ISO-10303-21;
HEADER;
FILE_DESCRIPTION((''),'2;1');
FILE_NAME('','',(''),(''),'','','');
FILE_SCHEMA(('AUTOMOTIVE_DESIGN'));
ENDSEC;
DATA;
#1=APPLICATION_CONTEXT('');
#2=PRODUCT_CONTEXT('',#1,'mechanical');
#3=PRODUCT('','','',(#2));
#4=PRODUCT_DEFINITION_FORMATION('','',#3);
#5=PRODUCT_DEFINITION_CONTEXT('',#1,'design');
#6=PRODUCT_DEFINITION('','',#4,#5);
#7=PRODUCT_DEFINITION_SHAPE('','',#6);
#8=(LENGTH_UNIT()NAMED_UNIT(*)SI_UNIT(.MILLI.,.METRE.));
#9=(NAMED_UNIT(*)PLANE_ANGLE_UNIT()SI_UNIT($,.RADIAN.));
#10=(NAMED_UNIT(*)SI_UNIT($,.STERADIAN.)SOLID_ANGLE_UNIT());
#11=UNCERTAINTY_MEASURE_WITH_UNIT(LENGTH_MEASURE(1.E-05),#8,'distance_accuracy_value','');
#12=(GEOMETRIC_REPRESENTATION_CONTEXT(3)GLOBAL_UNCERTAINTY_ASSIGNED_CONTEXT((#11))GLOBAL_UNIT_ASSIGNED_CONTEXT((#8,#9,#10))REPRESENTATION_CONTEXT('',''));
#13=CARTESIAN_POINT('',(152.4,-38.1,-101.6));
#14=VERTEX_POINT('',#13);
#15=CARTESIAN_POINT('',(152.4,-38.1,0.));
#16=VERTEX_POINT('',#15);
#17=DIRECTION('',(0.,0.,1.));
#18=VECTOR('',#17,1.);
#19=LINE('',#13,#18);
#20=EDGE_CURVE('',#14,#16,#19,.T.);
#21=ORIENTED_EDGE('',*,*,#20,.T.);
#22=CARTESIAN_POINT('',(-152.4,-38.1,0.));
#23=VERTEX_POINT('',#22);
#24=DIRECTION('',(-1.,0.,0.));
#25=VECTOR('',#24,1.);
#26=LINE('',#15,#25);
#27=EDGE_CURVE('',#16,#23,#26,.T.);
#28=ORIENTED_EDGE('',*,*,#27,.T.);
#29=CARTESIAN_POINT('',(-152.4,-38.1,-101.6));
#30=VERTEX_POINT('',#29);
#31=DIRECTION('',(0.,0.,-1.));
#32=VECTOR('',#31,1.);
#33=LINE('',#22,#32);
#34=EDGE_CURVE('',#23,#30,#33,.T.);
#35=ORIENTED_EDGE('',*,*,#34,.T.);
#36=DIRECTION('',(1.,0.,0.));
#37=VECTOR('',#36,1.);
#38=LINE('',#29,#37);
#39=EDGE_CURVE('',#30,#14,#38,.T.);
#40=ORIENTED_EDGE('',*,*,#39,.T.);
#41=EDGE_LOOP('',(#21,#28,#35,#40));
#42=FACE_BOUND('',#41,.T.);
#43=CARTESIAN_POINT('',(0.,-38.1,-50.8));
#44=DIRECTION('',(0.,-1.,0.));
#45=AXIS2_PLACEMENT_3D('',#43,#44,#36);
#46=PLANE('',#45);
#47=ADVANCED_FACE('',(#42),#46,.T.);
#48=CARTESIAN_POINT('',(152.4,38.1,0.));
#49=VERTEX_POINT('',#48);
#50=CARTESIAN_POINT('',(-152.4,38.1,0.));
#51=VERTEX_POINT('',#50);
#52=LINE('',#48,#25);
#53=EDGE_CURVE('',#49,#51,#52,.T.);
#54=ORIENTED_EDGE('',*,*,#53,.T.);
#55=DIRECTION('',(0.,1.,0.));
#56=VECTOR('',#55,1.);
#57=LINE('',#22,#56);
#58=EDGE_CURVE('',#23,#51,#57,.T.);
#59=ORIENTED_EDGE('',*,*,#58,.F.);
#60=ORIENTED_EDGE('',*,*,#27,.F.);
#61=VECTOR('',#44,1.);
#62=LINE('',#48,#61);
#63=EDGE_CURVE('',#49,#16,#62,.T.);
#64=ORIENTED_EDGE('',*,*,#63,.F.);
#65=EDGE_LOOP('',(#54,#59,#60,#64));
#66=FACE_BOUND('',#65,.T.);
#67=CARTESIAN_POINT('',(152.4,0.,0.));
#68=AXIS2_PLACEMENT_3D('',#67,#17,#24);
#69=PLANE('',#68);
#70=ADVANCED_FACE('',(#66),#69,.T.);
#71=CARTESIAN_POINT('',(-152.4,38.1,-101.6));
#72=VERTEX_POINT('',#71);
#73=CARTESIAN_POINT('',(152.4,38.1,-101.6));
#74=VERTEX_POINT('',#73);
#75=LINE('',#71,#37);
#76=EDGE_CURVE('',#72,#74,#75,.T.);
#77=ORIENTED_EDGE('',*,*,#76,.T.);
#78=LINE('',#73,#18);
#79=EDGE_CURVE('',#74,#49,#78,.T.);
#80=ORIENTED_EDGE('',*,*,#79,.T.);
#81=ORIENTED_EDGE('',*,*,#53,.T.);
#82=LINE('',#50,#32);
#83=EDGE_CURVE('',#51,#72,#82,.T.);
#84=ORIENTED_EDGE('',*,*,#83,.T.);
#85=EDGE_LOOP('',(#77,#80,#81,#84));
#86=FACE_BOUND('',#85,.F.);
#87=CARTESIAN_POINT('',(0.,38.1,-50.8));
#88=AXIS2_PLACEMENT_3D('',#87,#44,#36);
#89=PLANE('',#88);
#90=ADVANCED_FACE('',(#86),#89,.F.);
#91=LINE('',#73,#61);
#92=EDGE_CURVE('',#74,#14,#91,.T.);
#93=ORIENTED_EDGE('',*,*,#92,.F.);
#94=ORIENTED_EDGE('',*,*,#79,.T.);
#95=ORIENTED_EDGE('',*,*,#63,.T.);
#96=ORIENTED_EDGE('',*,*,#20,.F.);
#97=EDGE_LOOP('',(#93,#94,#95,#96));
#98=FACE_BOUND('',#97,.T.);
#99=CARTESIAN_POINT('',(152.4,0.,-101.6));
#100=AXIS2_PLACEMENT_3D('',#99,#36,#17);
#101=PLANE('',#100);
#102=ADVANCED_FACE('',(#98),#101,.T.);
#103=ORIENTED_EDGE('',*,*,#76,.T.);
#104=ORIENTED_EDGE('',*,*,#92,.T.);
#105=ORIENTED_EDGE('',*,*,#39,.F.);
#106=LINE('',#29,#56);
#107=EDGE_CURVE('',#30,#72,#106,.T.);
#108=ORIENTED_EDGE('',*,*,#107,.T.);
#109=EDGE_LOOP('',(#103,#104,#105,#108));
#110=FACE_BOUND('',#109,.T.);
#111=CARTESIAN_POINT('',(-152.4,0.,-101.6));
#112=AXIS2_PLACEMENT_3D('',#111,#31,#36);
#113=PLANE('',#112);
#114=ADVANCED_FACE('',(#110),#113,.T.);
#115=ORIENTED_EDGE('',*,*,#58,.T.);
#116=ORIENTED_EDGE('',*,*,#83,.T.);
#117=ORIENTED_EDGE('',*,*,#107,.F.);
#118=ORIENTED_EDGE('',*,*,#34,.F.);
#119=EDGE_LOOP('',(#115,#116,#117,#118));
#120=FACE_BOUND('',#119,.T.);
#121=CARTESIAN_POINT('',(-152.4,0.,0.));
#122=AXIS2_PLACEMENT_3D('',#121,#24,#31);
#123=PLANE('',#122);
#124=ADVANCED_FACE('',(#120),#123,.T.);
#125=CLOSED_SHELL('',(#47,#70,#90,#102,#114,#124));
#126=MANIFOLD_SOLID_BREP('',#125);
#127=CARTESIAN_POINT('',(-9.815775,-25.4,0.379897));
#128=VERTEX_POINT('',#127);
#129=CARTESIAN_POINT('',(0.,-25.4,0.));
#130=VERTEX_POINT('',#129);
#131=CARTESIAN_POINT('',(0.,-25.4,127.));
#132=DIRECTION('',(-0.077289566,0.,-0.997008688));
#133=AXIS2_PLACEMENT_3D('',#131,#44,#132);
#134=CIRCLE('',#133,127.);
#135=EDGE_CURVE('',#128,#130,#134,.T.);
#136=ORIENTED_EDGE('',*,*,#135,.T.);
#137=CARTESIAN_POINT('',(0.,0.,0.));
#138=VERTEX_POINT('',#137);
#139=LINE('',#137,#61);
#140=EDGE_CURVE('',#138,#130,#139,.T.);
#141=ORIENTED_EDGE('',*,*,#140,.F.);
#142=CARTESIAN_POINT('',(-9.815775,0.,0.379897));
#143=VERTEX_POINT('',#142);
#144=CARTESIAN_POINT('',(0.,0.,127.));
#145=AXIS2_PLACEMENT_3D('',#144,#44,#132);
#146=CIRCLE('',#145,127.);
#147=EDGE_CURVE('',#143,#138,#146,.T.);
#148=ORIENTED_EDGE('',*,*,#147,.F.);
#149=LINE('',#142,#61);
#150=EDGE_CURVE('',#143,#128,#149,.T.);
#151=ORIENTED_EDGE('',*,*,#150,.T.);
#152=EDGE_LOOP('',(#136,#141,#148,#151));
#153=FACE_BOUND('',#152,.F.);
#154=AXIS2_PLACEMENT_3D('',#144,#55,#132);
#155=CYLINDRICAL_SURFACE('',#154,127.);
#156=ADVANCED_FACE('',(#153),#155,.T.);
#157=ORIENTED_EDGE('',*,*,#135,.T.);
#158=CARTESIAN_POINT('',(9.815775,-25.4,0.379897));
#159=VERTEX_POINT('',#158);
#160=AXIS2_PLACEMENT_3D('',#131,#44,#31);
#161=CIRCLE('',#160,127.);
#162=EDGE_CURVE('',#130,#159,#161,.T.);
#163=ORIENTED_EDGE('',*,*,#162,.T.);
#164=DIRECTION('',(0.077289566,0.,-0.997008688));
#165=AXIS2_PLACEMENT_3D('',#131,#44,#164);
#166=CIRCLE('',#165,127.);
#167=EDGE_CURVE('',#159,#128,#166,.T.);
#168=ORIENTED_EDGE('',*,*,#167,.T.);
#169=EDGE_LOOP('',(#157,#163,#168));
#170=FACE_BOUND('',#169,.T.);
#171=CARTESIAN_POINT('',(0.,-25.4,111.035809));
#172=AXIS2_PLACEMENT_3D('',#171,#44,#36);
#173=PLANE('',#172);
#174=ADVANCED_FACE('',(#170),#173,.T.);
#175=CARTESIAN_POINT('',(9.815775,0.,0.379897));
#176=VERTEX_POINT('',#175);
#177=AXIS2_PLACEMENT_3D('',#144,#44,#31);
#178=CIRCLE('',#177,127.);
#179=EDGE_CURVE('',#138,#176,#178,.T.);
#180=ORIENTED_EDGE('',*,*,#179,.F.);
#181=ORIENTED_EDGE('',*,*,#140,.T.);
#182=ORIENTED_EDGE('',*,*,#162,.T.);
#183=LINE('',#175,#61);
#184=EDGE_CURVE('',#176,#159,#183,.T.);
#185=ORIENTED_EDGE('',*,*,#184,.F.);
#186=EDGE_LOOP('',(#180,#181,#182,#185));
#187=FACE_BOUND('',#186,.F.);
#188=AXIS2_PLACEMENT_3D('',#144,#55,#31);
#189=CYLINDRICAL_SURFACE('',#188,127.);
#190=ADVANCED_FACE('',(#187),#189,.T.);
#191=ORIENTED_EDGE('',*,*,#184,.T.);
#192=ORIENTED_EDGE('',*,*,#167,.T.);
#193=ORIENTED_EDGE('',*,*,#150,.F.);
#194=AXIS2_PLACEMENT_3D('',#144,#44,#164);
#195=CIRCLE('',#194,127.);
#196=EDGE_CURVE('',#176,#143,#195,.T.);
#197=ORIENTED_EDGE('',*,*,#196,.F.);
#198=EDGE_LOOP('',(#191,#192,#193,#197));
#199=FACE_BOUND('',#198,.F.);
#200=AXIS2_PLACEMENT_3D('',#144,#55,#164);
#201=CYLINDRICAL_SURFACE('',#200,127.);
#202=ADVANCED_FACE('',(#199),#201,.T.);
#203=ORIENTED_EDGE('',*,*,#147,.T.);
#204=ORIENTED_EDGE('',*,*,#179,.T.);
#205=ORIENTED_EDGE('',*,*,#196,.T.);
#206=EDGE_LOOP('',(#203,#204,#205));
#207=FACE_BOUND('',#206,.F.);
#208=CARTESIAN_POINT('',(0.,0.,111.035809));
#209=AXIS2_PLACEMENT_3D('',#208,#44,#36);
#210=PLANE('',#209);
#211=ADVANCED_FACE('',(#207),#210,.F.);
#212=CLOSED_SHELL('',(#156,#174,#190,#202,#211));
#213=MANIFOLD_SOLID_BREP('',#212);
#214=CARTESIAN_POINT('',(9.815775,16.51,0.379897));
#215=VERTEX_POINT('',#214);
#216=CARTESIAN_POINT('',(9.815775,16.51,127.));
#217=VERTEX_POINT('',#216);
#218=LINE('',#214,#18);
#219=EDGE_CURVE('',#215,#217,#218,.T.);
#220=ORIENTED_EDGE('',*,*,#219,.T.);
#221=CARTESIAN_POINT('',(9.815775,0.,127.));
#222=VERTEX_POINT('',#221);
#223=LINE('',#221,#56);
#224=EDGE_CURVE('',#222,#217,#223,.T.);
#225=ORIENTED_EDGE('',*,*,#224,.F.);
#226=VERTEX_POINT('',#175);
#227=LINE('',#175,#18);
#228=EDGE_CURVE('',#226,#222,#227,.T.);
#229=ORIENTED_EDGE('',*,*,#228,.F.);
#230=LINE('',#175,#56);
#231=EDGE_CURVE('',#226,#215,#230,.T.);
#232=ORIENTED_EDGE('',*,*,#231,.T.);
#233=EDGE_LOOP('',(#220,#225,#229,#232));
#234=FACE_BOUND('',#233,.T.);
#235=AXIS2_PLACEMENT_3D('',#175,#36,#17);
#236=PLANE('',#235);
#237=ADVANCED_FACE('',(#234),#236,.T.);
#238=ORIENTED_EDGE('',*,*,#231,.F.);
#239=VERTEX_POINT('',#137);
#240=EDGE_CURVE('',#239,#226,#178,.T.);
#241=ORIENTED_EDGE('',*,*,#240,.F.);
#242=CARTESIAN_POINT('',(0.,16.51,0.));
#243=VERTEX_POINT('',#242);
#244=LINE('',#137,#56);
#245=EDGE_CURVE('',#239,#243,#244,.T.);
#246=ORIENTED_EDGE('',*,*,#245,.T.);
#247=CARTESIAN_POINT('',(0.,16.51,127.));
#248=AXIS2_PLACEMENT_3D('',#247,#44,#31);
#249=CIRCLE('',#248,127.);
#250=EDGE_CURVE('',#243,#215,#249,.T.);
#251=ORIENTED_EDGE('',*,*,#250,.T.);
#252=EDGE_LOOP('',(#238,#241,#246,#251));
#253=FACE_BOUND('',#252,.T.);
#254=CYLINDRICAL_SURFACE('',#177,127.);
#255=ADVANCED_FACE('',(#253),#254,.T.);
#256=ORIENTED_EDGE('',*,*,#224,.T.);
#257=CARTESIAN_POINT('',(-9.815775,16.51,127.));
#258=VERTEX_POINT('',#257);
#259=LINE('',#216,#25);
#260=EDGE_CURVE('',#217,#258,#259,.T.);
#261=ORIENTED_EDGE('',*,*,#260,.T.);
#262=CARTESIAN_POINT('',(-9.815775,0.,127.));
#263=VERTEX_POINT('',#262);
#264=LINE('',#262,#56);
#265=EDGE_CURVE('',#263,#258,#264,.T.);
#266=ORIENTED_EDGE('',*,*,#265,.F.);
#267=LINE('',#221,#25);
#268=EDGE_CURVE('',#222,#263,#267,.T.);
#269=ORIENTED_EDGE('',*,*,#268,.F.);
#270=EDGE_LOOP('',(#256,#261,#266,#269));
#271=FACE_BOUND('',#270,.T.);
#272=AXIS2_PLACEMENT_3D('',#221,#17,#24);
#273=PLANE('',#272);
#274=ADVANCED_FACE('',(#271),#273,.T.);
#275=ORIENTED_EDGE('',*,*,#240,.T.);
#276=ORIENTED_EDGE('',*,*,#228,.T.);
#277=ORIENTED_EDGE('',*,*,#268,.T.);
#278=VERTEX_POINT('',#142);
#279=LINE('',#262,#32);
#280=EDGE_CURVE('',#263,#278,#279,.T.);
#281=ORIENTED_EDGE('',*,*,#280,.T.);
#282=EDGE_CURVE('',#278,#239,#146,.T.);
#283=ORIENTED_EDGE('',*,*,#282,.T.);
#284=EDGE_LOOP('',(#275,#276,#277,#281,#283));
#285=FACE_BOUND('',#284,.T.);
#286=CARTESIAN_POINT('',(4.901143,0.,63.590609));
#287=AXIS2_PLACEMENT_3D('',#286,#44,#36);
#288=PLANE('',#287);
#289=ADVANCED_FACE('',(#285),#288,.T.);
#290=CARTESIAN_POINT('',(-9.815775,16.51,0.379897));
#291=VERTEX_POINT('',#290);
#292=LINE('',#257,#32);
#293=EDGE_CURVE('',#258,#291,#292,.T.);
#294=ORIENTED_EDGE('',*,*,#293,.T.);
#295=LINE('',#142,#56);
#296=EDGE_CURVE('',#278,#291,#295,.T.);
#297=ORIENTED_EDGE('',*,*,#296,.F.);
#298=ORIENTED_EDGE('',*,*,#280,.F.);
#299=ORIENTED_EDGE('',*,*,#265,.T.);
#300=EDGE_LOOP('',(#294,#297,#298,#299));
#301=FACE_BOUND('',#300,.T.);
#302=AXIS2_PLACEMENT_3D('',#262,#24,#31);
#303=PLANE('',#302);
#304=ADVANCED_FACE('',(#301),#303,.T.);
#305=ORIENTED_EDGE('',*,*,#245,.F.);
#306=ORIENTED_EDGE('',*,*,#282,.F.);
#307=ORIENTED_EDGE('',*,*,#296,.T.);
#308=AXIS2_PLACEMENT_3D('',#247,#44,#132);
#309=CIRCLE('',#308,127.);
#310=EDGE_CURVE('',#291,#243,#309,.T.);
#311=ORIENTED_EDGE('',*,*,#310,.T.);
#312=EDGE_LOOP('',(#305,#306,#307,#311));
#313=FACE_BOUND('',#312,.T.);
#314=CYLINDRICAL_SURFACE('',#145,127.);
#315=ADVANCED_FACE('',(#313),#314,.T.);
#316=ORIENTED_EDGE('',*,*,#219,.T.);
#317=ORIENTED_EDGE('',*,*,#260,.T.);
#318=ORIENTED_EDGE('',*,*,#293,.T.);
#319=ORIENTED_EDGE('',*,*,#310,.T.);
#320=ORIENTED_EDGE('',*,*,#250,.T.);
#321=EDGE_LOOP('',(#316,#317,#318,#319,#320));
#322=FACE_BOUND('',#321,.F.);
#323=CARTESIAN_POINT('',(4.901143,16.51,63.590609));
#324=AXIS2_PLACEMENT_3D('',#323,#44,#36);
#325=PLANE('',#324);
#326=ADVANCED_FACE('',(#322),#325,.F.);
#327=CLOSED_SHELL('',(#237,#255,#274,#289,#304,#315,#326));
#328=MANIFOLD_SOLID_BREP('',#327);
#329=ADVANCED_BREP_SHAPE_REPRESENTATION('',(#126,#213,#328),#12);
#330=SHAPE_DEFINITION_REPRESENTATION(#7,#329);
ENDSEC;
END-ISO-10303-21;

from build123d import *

# Parameters (mm, degrees)
F1_DEPTH = 38.1
F2_DEPTH = 16.51
F3_DEPTH = 25.4


with BuildPart() as f1:
    # F0 (on Front) → F1 (new body, symmetric)
    with BuildSketch(Plane.XZ):
        Polygon((-152.4, -101.6), (152.4, -101.6), (152.4, 0), (9.815774858, 0), (0, 0), (-9.815774858, 0), (-152.4, 0), align=None)
    extrude(amount=F1_DEPTH, both=True)


with BuildPart() as f2:
    # F0 (on Front) → F2 (new body)
    with BuildSketch(Plane.XZ):
        with BuildLine():
            Line((0, 127), (0, 0))
            ThreePointArc((0, 0), (4.9115618074, 0.0950097096), (9.815774858, 0.3798966833))
            Line((9.815774858, 0.3798966833), (9.815774858, 127))
            Line((9.815774858, 127), (0, 127))
        make_face()
        with BuildLine():
            ThreePointArc((-9.815774858, 0.3798966833), (-4.9115618074, 0.0950097096), (0, 0))
            Line((0, 0), (0, 127))
            Line((0, 127), (-9.815774858, 127))
            Line((-9.815774858, 127), (-9.815774858, 0.3798966833))
        make_face()
    extrude(amount=-F2_DEPTH)


with BuildPart() as f3:
    # F0 (on Front) → F3 (new body)
    with BuildSketch(Plane.XZ):
        with BuildLine():
            Line((9.815774858, 127), (9.815774858, 0.3798966833))
            ThreePointArc((9.815774858, 0.3798966833), (93.208377861, 40.7376194595), (127, 127))
            ThreePointArc((127, 127), (-86.2623805405, 220.208377861), (-9.815774858, 0.3798966833))
            Line((-9.815774858, 0.3798966833), (-9.815774858, 127))
            Line((-9.815774858, 127), (0, 127))
            Line((0, 127), (9.815774858, 127))
        make_face()
        with BuildLine():
            ThreePointArc((-9.815774858, 0.3798966833), (-4.9115618074, 0.0950097096), (0, 0))
            Line((0, 0), (0, 127))
            Line((0, 127), (-9.815774858, 127))
            Line((-9.815774858, 127), (-9.815774858, 0.3798966833))
        make_face()
        with BuildLine():
            Line((0, 127), (0, 0))
            ThreePointArc((0, 0), (4.9115618074, 0.0950097096), (9.815774858, 0.3798966833))
            Line((9.815774858, 0.3798966833), (9.815774858, 127))
            Line((9.815774858, 127), (0, 127))
        make_face()
    extrude(amount=F3_DEPTH)


solid = Compound([f1.part, f2.part, f3.part])
